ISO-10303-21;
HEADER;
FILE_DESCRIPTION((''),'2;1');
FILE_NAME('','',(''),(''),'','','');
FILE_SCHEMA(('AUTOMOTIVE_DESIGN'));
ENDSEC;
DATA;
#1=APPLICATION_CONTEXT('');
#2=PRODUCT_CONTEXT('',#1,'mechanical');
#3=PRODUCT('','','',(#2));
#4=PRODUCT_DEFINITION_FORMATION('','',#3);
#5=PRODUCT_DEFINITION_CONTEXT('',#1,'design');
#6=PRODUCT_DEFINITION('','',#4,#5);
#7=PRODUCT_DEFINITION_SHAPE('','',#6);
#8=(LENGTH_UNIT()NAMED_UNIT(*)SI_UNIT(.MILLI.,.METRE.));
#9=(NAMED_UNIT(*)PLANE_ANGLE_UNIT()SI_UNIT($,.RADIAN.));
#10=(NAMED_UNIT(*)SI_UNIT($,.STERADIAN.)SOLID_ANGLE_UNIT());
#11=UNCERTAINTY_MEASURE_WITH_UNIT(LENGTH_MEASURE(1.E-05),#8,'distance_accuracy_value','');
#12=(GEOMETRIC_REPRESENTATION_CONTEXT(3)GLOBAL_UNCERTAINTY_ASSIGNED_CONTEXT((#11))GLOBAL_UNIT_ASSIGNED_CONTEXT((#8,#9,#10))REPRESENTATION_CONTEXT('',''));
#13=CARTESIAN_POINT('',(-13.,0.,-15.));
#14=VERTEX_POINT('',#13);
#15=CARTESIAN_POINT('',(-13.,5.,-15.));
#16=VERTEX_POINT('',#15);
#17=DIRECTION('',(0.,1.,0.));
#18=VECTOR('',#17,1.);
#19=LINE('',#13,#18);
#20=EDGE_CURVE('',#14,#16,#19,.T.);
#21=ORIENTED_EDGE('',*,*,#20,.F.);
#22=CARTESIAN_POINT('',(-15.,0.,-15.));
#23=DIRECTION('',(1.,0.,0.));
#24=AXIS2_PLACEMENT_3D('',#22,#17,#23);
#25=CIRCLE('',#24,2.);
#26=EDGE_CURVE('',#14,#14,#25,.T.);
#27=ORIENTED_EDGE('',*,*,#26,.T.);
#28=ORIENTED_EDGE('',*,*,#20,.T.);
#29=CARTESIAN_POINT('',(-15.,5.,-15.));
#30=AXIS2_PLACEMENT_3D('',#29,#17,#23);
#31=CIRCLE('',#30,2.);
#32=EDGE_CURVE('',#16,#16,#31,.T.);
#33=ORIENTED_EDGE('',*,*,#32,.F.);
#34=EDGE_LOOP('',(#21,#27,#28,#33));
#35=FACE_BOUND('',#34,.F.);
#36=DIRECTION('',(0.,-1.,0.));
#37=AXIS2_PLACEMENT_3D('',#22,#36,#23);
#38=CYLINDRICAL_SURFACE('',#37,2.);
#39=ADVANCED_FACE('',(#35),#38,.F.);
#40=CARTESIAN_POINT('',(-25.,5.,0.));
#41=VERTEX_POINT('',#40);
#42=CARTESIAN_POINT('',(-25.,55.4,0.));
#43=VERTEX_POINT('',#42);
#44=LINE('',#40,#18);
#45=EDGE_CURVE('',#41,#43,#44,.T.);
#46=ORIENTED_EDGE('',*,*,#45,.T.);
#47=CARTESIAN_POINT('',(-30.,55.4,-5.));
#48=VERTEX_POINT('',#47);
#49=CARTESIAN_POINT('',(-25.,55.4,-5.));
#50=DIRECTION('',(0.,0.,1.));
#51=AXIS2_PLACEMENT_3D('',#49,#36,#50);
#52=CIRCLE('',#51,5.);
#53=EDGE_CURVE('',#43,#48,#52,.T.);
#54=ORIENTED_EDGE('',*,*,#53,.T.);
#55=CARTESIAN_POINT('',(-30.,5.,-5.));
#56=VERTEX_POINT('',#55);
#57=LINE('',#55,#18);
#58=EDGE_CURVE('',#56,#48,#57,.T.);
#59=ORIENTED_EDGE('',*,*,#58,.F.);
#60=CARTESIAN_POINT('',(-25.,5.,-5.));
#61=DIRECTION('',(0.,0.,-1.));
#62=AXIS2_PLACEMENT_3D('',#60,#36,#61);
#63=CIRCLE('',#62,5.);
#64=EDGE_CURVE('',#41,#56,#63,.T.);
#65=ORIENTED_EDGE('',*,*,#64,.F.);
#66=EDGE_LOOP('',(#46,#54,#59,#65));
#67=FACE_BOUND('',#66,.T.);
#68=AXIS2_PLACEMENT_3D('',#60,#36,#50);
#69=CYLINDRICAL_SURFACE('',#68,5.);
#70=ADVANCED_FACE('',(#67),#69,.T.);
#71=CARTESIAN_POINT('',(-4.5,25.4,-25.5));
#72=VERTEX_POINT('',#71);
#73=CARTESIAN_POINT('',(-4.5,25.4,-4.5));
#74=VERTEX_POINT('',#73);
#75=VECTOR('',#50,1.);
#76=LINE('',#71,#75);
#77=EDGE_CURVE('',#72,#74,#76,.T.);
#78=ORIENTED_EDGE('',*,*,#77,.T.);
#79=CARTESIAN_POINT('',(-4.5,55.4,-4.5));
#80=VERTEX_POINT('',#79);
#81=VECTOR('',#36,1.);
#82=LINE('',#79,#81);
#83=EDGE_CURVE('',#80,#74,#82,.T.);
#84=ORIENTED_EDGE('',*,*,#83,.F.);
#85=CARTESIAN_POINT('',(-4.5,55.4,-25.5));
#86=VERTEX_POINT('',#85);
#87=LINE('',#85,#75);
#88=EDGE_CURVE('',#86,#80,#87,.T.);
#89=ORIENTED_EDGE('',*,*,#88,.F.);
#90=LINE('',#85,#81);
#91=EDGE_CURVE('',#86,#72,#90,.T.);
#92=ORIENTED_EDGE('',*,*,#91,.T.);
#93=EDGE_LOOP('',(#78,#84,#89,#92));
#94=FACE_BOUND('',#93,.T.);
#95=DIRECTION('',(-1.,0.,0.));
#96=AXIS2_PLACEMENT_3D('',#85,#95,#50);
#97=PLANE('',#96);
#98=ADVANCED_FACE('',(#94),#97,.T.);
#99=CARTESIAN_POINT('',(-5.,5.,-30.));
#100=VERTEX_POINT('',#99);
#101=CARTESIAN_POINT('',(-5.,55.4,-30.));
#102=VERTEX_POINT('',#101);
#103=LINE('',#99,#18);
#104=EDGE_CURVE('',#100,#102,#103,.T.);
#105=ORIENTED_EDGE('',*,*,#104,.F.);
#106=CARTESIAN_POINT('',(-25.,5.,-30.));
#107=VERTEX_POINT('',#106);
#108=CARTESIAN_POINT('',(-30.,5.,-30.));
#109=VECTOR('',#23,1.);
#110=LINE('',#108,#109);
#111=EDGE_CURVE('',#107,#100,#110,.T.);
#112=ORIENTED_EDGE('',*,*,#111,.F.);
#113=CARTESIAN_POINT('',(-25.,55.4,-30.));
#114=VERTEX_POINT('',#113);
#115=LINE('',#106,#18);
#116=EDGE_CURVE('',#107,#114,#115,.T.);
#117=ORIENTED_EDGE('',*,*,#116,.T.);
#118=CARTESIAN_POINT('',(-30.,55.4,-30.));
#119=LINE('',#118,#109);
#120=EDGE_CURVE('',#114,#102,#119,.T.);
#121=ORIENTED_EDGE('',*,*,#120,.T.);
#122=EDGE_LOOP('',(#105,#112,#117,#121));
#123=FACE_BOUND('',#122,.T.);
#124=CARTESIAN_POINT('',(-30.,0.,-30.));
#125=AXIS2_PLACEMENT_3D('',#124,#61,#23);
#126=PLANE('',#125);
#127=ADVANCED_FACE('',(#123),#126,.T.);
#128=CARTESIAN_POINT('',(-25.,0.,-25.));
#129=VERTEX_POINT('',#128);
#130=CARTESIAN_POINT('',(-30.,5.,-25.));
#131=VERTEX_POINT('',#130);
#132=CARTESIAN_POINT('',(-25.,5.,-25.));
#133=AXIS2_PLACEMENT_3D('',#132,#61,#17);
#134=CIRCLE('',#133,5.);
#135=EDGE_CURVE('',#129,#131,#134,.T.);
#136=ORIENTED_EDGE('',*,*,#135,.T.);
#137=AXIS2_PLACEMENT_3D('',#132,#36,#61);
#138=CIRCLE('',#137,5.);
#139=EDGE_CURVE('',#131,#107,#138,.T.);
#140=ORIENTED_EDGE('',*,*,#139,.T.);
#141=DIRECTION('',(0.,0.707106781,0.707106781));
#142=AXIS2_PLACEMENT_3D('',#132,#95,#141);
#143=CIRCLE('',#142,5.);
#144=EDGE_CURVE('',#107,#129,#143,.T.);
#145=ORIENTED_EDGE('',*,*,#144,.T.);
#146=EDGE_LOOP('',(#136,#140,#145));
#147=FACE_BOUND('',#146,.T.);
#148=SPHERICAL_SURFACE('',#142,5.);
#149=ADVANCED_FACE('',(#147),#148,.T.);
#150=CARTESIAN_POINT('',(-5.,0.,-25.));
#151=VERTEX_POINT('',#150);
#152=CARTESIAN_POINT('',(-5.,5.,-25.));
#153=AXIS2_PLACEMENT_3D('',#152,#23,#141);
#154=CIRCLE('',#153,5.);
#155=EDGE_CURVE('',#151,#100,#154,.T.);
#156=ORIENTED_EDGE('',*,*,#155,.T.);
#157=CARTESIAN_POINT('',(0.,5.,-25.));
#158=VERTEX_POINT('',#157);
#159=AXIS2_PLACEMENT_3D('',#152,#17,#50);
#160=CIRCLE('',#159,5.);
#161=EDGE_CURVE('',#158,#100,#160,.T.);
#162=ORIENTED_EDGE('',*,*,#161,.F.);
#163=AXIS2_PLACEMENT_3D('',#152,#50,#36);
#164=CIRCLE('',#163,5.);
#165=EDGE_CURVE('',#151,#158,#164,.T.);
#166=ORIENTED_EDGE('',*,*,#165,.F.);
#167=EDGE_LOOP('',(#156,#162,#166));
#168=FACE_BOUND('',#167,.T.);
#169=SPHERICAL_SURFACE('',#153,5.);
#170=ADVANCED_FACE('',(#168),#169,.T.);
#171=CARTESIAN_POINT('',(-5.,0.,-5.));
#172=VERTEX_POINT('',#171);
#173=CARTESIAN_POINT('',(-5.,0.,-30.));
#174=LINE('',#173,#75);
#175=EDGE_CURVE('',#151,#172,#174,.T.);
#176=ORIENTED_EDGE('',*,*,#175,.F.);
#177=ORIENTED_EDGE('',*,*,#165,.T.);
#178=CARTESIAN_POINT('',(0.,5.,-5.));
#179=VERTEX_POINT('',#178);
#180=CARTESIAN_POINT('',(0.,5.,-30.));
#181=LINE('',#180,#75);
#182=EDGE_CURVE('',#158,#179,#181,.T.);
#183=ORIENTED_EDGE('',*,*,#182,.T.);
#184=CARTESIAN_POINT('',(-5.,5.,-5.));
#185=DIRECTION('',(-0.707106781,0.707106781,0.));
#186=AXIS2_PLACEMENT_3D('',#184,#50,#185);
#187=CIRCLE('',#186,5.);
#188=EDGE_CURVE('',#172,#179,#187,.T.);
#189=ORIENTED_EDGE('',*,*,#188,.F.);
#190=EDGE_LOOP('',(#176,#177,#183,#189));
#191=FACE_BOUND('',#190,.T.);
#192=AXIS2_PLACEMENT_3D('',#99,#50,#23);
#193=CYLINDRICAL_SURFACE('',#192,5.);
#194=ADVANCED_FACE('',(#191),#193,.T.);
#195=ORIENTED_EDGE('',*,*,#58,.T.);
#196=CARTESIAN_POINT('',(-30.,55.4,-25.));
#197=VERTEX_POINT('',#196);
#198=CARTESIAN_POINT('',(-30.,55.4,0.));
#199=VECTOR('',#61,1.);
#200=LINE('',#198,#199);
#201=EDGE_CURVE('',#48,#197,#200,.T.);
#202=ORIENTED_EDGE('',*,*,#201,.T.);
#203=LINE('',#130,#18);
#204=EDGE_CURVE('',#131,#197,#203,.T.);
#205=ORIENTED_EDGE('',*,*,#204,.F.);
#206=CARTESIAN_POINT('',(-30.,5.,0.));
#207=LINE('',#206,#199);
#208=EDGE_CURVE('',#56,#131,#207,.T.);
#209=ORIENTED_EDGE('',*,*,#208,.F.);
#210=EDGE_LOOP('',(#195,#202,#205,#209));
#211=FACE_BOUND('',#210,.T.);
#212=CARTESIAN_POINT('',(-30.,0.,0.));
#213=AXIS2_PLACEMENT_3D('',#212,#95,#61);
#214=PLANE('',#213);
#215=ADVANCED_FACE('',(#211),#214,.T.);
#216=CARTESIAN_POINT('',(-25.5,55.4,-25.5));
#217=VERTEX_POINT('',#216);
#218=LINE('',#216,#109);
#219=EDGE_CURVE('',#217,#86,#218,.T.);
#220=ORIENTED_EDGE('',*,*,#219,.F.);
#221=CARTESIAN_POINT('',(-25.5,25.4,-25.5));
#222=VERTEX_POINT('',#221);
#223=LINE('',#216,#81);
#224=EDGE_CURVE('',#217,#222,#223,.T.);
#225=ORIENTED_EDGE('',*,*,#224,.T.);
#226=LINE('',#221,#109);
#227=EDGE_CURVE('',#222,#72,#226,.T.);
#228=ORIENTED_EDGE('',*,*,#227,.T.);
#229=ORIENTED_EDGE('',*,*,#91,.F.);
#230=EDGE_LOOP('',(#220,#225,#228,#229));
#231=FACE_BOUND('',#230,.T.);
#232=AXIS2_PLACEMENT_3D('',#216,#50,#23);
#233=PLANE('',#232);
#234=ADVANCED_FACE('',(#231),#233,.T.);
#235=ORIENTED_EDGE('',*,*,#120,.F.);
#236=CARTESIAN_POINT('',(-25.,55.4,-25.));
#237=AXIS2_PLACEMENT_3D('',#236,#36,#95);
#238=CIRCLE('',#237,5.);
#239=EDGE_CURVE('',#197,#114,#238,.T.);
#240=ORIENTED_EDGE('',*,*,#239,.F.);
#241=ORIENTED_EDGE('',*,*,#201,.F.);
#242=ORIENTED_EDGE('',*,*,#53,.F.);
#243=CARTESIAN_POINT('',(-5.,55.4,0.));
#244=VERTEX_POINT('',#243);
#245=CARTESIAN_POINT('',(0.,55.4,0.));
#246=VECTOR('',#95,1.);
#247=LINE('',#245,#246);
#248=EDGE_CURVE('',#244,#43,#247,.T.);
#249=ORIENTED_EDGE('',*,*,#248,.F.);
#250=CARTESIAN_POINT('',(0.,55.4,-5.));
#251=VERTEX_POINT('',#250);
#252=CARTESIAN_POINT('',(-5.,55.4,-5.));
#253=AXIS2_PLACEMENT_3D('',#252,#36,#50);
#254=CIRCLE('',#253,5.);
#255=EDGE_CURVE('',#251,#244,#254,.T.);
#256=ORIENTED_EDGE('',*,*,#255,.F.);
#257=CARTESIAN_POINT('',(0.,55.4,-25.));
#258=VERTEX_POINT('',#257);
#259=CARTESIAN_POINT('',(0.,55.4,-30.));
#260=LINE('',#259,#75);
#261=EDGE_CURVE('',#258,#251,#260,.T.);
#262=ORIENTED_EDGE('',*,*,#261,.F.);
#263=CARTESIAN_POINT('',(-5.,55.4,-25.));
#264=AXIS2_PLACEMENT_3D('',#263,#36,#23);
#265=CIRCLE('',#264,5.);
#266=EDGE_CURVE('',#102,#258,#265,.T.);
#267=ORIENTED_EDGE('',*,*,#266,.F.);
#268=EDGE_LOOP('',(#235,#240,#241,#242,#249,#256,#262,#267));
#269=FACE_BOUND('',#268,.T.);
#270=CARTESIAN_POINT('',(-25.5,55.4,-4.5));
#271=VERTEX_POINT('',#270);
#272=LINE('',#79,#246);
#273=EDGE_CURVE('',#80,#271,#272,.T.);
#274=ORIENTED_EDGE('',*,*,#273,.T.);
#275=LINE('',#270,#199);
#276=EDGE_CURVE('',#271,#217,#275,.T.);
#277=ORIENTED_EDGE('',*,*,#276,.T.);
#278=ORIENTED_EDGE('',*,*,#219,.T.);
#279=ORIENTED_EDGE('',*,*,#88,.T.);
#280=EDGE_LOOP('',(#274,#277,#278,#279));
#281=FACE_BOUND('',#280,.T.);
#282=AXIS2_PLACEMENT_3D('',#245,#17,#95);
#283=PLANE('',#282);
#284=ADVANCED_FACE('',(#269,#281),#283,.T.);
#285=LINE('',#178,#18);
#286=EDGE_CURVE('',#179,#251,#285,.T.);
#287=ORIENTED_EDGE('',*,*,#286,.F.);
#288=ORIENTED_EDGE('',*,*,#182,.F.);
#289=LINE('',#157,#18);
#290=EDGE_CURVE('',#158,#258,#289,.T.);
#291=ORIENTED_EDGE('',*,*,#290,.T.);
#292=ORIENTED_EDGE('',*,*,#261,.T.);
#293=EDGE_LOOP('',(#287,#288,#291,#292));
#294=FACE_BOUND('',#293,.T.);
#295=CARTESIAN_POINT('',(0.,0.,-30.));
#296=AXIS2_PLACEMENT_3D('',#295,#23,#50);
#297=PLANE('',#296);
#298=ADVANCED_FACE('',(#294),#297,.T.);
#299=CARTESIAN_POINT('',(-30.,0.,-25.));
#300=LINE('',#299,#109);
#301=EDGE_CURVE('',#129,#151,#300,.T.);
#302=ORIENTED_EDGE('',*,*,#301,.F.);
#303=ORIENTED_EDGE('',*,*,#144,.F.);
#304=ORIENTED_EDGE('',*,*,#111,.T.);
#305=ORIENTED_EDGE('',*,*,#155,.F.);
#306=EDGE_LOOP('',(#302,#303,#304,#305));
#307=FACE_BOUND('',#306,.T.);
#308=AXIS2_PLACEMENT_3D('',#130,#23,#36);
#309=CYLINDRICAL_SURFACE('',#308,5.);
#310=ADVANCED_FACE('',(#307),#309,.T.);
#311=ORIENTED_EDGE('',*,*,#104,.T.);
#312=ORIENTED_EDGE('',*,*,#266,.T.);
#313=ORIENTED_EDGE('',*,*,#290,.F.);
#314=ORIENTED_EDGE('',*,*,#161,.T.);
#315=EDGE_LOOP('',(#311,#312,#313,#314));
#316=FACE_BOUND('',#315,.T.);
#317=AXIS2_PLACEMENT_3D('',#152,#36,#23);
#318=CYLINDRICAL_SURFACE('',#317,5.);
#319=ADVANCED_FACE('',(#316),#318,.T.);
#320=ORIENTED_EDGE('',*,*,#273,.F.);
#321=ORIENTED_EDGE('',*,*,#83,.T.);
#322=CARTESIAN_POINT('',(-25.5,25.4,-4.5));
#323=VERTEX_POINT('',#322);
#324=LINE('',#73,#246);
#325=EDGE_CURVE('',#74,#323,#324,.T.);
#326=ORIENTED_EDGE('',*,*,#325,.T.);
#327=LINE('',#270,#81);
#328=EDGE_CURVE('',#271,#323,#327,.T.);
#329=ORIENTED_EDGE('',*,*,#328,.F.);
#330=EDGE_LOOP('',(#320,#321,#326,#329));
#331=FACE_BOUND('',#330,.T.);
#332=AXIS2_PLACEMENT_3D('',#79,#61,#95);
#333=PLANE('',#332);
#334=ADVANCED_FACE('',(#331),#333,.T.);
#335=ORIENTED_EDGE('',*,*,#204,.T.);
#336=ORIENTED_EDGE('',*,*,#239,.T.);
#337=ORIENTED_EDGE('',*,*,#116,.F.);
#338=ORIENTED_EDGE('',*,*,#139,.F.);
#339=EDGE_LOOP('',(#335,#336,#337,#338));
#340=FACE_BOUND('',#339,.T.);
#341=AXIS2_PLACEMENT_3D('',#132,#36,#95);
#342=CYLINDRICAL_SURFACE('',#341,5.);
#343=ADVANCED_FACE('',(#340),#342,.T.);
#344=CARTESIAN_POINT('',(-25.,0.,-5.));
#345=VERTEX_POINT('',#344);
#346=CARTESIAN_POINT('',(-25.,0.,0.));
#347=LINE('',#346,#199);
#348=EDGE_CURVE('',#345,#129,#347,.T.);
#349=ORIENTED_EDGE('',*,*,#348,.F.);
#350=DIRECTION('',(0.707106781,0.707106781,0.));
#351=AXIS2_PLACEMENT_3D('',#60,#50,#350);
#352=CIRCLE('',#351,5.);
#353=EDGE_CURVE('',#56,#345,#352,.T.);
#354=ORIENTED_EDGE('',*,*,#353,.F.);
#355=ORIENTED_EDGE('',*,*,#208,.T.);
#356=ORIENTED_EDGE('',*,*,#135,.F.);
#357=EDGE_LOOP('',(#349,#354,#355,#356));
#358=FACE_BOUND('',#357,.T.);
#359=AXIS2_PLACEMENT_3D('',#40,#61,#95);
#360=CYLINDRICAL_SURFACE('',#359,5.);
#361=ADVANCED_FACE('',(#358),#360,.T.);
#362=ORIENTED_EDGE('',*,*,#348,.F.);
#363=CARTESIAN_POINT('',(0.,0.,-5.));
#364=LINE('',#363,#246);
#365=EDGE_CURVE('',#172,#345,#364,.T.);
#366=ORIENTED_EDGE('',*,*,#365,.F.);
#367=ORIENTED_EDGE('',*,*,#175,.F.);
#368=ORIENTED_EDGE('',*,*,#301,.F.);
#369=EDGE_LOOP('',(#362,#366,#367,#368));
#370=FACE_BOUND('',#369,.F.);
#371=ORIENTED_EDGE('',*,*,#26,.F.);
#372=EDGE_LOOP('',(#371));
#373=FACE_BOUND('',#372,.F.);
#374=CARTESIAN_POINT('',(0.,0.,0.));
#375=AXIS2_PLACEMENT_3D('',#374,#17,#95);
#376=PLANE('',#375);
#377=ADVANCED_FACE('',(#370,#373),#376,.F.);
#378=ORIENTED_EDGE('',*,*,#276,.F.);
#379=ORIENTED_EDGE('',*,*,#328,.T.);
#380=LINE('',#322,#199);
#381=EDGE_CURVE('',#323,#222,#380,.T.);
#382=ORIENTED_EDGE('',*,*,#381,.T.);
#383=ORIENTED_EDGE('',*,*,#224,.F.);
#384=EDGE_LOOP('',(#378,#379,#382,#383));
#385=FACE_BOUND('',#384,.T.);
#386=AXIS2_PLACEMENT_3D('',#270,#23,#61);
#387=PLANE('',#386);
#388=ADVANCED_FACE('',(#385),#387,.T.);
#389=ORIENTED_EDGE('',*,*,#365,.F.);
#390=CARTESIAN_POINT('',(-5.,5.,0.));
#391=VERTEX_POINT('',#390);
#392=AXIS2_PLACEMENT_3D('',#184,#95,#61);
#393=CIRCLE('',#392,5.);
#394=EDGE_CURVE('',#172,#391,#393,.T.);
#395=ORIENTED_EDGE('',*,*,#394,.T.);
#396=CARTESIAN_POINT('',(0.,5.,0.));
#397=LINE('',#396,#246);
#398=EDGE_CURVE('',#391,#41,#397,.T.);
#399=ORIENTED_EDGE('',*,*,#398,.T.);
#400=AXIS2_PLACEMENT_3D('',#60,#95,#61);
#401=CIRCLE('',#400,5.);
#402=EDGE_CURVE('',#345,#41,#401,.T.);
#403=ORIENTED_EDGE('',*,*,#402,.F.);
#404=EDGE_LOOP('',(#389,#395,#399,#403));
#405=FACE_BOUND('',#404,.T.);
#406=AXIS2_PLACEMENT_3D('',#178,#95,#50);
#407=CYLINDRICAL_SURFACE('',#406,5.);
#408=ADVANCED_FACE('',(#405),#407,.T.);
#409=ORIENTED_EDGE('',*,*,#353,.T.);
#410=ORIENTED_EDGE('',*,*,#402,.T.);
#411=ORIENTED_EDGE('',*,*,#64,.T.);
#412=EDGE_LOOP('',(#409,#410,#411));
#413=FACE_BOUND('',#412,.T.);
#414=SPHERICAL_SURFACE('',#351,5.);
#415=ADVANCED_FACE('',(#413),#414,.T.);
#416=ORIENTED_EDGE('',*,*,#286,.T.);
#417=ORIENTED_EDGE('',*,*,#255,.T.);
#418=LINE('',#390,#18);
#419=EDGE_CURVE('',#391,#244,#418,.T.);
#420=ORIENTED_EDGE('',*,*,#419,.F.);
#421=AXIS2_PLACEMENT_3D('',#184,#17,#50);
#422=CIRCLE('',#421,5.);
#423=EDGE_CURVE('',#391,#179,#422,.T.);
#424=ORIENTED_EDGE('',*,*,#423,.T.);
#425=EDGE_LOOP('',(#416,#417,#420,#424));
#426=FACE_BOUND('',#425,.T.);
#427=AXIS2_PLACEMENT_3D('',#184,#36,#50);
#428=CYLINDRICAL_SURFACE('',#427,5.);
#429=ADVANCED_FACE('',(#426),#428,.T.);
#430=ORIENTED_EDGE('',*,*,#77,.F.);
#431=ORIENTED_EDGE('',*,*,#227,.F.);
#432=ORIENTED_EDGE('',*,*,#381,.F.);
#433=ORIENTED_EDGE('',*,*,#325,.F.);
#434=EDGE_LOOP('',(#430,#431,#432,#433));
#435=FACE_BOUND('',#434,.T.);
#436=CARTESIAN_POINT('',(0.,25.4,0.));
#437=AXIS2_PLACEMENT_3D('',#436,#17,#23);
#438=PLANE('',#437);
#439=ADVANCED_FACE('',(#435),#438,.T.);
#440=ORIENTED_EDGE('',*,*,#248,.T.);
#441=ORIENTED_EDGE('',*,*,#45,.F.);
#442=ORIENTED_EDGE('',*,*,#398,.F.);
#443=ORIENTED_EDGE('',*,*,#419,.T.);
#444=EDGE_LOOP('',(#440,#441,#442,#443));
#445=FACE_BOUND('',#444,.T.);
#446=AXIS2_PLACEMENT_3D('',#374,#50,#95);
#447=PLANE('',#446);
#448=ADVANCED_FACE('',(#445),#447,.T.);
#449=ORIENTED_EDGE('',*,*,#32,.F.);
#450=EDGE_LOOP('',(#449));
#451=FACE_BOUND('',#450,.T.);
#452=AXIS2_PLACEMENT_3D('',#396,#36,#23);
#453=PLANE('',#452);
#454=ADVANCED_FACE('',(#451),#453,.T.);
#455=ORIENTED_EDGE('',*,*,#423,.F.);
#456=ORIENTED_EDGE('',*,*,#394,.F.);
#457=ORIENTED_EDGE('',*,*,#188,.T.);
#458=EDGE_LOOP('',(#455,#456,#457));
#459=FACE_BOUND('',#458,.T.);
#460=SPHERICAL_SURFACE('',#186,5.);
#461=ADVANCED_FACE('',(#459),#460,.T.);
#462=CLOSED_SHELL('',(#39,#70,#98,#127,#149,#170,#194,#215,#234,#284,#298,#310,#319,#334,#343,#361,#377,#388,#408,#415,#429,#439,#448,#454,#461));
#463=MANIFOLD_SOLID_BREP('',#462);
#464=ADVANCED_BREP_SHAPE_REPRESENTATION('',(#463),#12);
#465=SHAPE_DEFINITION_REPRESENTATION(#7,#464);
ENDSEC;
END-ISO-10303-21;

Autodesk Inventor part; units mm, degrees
ref_plane "YZ Plane" through (0, 0, 0) normal (1, 0, 0) x (0, 1, 0)
ref_plane "XZ Plane" through (0, 0, 0) normal (0, 1, 0) x (-1, 0, 0)
ref_plane "XY Plane" through (0, 0, 0) normal (0, 0, 1) x (1, 0, 0)
sketch "Sketch1" plane through (0, 0, 0) normal (0, 1, 0) x (-1, 0, 0)
  line L0 (0, 0) -> (30, 0)
  line L1 (30, 0) -> (30, -30)
  line L2 (30, -30) -> (0, -30)
  line L3 (0, -30) -> (0, 0)
  dimension "d0" = 30
  dimension "d1" = 30
extrude "Extrusion1" add sketch "Sketch1" along normal blind 55.4
sketch "Sketch2" plane through (0, 55.4, 0) normal (0, 1, 0) x (1, 0, 0)
  line L0 (0, 0) -> (0, 30) projected
  line L1 (0, 0) -> (0, 4.5)
  line L2 (0, 4.5) -> (-4.5, 4.5)
  line L3 (-4.5, 4.5) -> (-25.5, 4.5)
  line L4 (-25.5, 4.5) -> (-25.5, 25.5)
  line L5 (-25.5, 25.5) -> (-4.5, 25.5)
  line L6 (-4.5, 25.5) -> (-4.5, 4.5)
  dimension "d4" = 4.5
  dimension "d5" = 4.5
  dimension "d6" = 21
  dimension "d7" = 21
extrude "Extrusion2" cut sketch "Sketch2" against normal blind 30
sketch "Sketch3" plane through (0, 0, 0) normal (0, -1, 0) x (1, 0, 0)
  line L0 (0, 0) -> (-15, 0)
  line L1 (0, 0) -> (-30, 0) projected
  line L2 (-15, 0) -> (-15, -15)
  circle A0 centre (-15, -15) radius 2
  dimension "d10" = 15
  dimension "d11" = 4
extrude "Extrusion3" cut sketch "Sketch3" against normal blind 5
fillet "Fillet1" radius 5 4 edges at (0, 0, -15) (-15, 0, 0) (-15, 0, -30) (-30, 0, -15)
fillet "Fillet2" radius 5 8 edges at (-1.4645, 1.4645, -28.5355) (0, 30.2, -30) (-1.4645, 1.4645, -1.4645) (0, 30.2, 0) (-28.5355, 1.4645, -28.5355) (-30, 30.2, -30) (-28.5355, 1.4645, -1.4645) (-30, 30.2, 0)
properties part number "1in_2020_Endcap"
